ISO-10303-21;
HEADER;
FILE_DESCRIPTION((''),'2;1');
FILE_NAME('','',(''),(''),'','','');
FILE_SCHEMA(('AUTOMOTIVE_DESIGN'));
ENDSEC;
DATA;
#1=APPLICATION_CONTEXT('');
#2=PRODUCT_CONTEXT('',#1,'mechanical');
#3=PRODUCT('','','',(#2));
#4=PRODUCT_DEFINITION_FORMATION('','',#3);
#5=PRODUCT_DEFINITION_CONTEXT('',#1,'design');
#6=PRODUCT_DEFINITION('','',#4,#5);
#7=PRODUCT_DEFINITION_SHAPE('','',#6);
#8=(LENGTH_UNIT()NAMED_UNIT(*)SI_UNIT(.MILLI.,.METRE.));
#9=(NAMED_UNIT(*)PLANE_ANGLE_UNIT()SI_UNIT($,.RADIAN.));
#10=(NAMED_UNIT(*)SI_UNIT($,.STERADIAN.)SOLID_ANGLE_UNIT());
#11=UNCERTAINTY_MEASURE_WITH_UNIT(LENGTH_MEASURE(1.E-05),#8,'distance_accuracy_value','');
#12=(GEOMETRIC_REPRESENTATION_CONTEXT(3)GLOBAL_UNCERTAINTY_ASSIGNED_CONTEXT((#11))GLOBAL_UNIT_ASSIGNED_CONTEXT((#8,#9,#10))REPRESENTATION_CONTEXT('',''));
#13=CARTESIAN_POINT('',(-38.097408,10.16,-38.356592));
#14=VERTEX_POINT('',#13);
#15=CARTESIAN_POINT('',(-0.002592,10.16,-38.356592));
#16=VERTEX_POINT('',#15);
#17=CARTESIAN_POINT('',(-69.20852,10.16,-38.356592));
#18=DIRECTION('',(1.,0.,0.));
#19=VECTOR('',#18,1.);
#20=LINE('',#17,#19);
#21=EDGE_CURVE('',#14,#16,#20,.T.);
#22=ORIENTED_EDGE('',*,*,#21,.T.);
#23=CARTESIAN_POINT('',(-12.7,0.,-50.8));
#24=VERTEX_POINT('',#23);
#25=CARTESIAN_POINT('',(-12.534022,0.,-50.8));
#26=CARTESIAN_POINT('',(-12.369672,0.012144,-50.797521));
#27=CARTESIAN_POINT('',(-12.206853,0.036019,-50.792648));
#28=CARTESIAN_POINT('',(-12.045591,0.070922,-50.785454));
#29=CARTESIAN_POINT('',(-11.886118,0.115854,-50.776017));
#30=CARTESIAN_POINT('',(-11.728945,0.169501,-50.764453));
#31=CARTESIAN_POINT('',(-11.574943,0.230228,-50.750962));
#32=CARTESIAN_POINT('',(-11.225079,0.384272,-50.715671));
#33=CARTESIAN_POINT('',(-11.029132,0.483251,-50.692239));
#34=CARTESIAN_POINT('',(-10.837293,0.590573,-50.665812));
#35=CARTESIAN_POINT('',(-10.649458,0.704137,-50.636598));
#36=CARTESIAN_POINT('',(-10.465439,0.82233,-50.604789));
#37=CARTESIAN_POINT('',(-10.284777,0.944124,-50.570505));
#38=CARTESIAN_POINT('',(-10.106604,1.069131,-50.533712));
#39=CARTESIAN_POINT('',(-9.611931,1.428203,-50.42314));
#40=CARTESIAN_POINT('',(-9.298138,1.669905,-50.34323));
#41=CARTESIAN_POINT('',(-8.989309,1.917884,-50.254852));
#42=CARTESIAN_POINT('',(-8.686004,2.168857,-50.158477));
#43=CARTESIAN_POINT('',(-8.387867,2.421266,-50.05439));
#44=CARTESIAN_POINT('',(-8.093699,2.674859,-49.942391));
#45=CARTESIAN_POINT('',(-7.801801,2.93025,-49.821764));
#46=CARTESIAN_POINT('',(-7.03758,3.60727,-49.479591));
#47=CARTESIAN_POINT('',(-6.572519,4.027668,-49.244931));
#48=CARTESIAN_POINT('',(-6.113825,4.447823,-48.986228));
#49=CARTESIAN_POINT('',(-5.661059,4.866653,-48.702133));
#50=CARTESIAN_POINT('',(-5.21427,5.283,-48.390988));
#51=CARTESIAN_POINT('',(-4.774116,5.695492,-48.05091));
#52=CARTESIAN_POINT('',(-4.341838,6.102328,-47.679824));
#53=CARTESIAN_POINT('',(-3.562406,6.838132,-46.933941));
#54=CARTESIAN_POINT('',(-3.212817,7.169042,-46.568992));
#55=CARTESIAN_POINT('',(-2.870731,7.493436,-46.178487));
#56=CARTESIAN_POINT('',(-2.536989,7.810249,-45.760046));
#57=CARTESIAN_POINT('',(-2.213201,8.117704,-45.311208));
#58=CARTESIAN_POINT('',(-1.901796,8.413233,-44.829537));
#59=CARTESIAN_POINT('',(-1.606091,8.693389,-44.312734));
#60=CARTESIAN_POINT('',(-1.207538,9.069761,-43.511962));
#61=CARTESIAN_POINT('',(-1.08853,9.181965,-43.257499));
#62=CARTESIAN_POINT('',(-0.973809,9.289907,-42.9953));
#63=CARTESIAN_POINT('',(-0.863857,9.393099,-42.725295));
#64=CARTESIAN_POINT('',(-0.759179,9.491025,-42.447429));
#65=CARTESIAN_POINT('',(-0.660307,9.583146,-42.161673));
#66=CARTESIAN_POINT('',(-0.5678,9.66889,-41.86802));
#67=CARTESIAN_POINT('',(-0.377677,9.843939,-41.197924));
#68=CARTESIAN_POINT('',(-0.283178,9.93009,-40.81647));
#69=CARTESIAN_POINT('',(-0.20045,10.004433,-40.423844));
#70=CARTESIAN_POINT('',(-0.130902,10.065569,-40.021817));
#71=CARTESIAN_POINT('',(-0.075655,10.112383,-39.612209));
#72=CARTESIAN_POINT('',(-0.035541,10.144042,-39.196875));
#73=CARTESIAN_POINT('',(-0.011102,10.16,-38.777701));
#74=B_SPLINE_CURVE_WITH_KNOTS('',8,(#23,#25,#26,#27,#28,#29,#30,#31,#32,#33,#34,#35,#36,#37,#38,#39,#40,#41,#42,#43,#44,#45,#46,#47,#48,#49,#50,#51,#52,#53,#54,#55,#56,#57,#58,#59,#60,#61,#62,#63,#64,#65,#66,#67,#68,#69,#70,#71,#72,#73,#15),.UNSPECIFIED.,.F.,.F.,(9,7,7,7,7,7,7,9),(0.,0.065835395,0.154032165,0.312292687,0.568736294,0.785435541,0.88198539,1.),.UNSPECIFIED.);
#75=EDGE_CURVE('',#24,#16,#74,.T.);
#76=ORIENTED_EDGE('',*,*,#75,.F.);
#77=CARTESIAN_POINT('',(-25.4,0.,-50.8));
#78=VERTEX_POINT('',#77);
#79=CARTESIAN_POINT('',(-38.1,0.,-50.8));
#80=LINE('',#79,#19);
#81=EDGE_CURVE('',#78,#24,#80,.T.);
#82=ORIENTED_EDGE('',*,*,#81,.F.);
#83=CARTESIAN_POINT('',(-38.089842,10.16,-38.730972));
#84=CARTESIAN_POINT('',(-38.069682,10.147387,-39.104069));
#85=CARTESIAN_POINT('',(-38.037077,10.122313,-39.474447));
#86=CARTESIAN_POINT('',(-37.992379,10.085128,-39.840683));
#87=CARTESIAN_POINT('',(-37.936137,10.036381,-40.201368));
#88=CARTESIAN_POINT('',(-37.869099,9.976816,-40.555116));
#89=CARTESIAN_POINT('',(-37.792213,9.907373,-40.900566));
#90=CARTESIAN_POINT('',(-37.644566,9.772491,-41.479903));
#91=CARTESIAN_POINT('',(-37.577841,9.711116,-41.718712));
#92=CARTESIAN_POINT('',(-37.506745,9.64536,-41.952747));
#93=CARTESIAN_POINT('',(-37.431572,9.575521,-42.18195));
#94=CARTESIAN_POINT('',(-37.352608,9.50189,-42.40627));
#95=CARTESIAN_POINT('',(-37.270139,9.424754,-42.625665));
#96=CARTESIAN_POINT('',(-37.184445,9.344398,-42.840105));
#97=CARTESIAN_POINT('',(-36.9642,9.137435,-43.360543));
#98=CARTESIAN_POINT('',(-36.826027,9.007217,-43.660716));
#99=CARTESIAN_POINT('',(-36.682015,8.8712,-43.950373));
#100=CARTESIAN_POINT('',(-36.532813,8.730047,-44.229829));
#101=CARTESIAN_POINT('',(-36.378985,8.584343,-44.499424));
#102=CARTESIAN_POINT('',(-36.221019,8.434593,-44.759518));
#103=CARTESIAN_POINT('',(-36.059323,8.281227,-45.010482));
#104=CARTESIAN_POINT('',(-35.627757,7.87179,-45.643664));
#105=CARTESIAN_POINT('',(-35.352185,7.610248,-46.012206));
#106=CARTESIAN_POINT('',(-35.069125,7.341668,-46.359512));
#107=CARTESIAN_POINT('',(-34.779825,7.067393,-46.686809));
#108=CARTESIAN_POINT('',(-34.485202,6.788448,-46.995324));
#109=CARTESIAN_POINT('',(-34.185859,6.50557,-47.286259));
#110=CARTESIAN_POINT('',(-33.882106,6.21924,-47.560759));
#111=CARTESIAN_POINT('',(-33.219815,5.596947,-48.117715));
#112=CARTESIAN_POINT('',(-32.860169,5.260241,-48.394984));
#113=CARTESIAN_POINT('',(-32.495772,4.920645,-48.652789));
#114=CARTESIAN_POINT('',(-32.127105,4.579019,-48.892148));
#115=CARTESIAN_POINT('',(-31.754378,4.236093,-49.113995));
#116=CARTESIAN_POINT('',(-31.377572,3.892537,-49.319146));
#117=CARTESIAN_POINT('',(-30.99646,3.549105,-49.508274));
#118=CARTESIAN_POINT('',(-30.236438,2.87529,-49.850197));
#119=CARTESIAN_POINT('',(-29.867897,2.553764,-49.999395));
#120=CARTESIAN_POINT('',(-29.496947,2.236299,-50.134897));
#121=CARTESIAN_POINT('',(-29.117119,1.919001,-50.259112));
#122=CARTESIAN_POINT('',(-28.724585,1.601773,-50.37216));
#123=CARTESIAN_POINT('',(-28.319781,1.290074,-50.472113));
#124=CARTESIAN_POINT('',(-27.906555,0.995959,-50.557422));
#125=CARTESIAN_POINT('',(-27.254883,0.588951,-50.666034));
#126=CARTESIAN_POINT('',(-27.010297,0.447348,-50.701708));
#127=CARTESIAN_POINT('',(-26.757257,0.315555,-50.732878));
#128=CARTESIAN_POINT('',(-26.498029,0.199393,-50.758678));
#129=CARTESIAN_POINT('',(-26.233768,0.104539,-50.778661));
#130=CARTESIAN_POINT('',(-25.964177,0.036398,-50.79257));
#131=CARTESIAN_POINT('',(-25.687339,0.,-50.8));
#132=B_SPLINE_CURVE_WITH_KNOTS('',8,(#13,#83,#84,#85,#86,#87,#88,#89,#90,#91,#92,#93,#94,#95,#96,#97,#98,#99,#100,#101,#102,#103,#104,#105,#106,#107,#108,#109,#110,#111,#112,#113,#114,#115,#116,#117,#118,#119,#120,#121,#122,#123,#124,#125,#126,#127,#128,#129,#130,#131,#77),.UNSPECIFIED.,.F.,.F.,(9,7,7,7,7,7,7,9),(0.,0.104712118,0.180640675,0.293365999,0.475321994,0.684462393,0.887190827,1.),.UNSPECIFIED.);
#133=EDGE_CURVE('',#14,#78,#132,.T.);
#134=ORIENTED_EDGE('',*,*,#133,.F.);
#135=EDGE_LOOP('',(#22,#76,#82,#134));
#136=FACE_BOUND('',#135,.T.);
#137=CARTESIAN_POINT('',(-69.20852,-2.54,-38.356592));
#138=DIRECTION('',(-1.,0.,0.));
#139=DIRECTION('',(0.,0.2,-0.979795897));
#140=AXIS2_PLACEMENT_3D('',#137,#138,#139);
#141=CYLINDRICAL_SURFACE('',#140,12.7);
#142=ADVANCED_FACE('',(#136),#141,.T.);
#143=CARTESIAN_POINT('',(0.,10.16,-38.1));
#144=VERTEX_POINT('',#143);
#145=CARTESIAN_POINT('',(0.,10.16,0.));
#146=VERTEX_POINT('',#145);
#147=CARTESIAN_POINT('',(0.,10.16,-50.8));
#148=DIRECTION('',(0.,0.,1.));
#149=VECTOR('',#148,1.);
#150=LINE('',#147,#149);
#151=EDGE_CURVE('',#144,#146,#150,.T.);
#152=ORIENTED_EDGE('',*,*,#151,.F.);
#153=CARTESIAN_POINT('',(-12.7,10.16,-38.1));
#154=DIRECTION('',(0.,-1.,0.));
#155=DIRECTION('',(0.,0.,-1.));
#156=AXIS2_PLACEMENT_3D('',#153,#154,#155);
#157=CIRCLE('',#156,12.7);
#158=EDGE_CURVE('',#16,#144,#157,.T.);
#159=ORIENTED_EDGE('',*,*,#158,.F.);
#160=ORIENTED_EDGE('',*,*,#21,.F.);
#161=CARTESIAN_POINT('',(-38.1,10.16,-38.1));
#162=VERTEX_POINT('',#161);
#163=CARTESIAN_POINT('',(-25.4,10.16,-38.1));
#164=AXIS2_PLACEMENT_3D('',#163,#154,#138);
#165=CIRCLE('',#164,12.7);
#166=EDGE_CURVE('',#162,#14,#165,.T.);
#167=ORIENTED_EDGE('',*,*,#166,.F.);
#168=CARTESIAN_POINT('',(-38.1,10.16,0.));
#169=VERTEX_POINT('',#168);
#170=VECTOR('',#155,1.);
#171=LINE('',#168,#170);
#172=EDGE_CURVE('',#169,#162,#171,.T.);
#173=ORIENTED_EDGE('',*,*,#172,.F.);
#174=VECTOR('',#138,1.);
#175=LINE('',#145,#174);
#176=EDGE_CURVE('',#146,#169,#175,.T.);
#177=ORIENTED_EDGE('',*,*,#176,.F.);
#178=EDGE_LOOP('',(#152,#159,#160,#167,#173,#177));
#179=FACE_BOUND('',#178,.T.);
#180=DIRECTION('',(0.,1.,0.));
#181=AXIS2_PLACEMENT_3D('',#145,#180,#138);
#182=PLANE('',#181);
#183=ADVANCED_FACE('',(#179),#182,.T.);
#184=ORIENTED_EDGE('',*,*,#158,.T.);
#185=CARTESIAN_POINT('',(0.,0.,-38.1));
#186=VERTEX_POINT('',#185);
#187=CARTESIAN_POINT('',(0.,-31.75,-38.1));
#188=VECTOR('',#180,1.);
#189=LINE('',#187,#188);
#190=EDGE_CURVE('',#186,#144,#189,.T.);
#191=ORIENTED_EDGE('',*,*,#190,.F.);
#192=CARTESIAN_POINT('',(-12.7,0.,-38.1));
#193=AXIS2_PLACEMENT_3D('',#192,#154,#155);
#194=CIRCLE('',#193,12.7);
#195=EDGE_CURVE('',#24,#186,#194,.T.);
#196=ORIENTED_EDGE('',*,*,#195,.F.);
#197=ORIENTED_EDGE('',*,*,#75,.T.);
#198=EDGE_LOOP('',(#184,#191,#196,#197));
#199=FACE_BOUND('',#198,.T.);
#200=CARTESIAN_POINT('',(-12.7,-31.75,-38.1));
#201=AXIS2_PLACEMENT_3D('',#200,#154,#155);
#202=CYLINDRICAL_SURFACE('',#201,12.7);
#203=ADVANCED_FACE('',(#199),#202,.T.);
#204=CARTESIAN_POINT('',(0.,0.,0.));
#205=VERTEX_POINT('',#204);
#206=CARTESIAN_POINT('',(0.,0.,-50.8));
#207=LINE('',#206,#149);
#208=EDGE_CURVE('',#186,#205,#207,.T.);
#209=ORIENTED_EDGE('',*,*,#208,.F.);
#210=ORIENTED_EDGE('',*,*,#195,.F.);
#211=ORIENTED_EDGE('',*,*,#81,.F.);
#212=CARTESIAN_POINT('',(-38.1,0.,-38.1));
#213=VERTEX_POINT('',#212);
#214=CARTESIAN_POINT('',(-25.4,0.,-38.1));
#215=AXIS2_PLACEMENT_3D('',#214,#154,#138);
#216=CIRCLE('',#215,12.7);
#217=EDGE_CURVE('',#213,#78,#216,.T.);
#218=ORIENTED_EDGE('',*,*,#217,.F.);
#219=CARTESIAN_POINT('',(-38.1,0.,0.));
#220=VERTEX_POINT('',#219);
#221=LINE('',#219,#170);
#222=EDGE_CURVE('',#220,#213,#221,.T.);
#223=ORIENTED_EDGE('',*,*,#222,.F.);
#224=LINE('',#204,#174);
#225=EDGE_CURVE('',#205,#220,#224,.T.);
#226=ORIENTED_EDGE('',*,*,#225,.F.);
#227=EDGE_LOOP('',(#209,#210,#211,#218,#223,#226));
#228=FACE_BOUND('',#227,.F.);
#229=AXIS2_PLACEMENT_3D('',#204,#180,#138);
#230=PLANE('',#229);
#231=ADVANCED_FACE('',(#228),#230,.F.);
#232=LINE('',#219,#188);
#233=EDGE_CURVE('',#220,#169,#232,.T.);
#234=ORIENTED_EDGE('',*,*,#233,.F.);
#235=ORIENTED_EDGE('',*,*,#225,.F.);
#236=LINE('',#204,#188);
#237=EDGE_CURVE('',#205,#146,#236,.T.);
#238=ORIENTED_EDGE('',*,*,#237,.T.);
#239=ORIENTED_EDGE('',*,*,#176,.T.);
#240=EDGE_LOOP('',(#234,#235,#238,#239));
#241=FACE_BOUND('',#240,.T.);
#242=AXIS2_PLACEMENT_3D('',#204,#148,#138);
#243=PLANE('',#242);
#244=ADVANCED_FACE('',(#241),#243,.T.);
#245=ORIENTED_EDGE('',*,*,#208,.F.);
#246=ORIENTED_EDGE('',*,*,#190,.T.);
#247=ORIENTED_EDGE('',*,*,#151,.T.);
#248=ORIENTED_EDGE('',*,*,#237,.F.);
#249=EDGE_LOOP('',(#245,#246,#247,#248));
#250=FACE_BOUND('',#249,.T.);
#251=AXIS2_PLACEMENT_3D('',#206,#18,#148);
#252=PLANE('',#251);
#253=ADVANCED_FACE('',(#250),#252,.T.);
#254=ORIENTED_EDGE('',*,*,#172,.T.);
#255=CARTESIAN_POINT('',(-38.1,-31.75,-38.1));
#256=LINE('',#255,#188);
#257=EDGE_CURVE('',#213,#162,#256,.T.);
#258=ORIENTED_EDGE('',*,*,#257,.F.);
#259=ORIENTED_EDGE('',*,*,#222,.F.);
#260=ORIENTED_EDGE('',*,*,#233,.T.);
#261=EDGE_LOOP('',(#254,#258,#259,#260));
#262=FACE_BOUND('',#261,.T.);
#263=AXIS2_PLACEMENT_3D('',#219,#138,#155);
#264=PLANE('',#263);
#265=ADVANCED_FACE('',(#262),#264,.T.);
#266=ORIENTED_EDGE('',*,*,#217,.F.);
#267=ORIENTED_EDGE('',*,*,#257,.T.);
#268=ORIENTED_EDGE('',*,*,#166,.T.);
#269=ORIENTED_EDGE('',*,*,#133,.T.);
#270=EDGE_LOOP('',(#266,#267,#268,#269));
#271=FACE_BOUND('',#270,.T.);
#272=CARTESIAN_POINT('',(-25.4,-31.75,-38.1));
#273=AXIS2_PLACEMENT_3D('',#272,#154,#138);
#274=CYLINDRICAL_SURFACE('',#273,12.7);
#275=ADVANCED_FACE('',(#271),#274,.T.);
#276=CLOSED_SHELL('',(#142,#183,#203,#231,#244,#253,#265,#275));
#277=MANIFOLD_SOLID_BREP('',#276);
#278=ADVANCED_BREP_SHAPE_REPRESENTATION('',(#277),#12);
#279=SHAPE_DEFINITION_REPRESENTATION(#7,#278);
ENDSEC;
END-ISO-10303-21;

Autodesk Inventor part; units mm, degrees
ref_plane "YZ Plane" through (0, 0, 0) normal (1, 0, 0) x (0, 1, 0)
ref_plane "XZ Plane" through (0, 0, 0) normal (0, 1, 0) x (-1, 0, 0)
ref_plane "XY Plane" through (0, 0, 0) normal (0, 0, 1) x (1, 0, 0)
sketch "Sketch1" plane through (0, 0, 0) normal (0, 1, 0) x (-1, 0, 0)
  line L0 (0, 0) -> (38.1, 0)
  line L1 (38.1, 0) -> (38.1, -50.8)
  line L2 (38.1, -50.8) -> (0, -50.8)
  line L3 (0, -50.8) -> (0, 0)
  dimension "d0" = 38.1
  dimension "d1" = 50.8
extrude "Extrusion1" add sketch "Sketch1" along normal blind 10.16
fillet "Fillet1" radius 12.7 3 edges at (0, 5.08, -50.8) (-38.1, 5.08, -50.8) (-19.05, 10.16, -50.8)
properties part number "EndStopMounts"
